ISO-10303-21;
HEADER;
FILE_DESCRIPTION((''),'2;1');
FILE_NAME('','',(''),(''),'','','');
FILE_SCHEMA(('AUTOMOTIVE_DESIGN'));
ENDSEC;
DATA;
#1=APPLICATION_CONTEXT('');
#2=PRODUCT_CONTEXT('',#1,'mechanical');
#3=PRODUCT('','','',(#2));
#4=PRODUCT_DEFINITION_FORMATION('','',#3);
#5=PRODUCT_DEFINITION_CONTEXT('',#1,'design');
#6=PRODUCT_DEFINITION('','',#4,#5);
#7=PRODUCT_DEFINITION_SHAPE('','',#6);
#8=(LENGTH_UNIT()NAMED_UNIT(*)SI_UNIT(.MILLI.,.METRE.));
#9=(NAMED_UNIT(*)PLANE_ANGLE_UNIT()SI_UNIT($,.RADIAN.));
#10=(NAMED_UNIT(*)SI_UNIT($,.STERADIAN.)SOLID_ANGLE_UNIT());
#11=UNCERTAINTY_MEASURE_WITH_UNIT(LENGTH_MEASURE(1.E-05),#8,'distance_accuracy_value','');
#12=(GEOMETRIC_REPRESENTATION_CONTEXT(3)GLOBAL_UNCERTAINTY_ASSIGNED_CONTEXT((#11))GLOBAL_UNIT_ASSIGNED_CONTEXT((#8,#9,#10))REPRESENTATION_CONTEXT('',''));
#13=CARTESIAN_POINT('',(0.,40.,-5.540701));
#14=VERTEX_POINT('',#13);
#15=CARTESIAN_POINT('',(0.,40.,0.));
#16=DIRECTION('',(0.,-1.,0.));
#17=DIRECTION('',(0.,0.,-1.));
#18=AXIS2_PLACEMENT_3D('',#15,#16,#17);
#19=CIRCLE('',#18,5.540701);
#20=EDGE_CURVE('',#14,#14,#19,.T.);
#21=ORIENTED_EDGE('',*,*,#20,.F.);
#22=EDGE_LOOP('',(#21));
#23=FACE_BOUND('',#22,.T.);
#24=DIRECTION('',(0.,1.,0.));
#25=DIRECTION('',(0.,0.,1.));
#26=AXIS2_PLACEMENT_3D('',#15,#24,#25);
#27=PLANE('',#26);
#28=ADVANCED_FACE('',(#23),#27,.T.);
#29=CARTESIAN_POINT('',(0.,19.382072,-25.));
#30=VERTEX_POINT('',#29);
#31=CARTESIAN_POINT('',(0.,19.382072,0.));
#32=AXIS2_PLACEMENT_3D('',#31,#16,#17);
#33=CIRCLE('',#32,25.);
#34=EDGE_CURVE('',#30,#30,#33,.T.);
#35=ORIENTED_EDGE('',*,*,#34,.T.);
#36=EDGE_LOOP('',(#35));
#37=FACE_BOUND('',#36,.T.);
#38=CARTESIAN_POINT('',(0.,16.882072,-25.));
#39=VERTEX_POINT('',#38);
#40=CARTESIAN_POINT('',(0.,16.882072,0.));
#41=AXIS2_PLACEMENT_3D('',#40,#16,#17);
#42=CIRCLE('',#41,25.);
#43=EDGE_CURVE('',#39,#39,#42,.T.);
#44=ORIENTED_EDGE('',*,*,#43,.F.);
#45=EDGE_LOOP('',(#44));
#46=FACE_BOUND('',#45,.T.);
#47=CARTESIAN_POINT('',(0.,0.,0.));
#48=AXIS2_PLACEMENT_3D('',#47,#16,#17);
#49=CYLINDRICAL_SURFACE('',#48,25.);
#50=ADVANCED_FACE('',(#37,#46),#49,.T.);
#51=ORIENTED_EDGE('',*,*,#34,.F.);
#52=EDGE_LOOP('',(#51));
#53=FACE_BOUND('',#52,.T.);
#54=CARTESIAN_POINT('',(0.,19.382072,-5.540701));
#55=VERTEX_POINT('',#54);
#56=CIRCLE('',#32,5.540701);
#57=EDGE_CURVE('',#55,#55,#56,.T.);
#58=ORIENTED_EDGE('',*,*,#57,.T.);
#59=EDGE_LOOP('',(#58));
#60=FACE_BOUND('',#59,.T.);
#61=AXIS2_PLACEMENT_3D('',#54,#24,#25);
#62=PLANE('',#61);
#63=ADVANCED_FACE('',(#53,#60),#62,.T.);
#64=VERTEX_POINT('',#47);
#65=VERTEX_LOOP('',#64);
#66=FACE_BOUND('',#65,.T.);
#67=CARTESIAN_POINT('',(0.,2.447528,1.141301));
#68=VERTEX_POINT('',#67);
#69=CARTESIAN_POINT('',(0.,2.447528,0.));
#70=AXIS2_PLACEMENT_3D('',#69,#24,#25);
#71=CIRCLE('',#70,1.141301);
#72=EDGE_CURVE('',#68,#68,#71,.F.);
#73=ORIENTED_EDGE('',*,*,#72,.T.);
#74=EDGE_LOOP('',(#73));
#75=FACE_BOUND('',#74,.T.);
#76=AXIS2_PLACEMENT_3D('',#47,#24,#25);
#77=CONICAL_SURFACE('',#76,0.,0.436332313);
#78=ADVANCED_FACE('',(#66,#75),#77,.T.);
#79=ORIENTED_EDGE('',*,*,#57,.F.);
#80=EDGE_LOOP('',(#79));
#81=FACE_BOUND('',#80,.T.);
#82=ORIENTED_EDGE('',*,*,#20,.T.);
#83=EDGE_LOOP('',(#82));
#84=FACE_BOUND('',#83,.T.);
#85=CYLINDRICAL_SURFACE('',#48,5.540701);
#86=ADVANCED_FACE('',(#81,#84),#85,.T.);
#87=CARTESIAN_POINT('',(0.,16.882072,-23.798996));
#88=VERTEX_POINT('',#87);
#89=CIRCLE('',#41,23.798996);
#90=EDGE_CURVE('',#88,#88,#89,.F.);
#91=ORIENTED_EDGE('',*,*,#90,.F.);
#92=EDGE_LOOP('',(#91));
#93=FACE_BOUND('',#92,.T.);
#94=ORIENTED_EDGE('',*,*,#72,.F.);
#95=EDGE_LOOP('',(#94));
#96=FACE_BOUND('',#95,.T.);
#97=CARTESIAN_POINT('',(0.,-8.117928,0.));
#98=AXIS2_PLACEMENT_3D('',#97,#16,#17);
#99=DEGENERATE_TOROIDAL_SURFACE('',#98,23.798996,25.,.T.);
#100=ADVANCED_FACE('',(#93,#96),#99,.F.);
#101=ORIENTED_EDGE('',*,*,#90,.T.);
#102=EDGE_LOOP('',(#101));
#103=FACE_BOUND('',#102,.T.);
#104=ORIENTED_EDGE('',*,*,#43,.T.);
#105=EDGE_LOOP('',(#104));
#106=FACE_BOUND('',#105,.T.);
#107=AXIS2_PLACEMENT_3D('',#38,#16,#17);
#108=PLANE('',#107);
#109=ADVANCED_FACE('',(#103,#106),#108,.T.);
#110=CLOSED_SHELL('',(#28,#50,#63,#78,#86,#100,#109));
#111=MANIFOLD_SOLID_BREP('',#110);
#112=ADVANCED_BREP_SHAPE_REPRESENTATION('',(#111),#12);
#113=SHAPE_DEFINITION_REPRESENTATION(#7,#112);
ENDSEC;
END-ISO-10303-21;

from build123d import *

# Parameters (mm, degrees)
FILLET1_R  = 25
FILLET11_R = 25


# Some blends are built 0.0001 mm under size
with BuildPart() as part:
    # Sketch1 → Revolve1 (revolve)
    with BuildSketch(Plane(origin=(0, 0, 0), x_dir=(0, 0, -1), z_dir=(1, 0, 0))):
        Polygon((0, 0), (5.540701052, 11.882071751), (5.540701052, 16.882071751), (25, 16.882071751), (25, 19.382071751), (5.540701052, 19.382071751), (5.540701052, 40), (0, 40), align=None)
    revolve(axis=Axis((0, 0, 0), (0, 1, 0)))

    # Fillet1
    # the kernel refuses this fillet: 25 mm, written as the material it adds along each edge
    with BuildSketch(Plane(origin=(0, 16.882071751, 0), x_dir=(0, 0, -1), z_dir=(1, 0, 0))) as fillet1_piece_1:
        with BuildLine():
            CenterArc((20.540701052, -25), FILLET1_R, 90, 36.869897646)
            Line((20.540701052, 0), (20.540701052, 0.5))
            Line((20.540701052, 0.5), (5.540701052, 0.5))
            Line((5.540701052, 0.5), (5.040701052, 0))
            ThreePointArc((5.040701052, 0), (5.040701052, -2.5), (5.240701052, -4.6))
            Line((5.240701052, -4.6), (5.540701052, -5))
        make_face()
    revolve(axis=Axis((0, 16.882071751, 0), (0, 1, 0)))

    # Fillet11
    fillet11_edges = [part.edges().sort_by_distance(p)[0] for p in [
        (0, 11.882071751, 5.540701052),
    ]]
    fillet(fillet11_edges, radius=FILLET11_R - 0.0001)  # a hair under: the kernel refuses the full size


solid = part.part
